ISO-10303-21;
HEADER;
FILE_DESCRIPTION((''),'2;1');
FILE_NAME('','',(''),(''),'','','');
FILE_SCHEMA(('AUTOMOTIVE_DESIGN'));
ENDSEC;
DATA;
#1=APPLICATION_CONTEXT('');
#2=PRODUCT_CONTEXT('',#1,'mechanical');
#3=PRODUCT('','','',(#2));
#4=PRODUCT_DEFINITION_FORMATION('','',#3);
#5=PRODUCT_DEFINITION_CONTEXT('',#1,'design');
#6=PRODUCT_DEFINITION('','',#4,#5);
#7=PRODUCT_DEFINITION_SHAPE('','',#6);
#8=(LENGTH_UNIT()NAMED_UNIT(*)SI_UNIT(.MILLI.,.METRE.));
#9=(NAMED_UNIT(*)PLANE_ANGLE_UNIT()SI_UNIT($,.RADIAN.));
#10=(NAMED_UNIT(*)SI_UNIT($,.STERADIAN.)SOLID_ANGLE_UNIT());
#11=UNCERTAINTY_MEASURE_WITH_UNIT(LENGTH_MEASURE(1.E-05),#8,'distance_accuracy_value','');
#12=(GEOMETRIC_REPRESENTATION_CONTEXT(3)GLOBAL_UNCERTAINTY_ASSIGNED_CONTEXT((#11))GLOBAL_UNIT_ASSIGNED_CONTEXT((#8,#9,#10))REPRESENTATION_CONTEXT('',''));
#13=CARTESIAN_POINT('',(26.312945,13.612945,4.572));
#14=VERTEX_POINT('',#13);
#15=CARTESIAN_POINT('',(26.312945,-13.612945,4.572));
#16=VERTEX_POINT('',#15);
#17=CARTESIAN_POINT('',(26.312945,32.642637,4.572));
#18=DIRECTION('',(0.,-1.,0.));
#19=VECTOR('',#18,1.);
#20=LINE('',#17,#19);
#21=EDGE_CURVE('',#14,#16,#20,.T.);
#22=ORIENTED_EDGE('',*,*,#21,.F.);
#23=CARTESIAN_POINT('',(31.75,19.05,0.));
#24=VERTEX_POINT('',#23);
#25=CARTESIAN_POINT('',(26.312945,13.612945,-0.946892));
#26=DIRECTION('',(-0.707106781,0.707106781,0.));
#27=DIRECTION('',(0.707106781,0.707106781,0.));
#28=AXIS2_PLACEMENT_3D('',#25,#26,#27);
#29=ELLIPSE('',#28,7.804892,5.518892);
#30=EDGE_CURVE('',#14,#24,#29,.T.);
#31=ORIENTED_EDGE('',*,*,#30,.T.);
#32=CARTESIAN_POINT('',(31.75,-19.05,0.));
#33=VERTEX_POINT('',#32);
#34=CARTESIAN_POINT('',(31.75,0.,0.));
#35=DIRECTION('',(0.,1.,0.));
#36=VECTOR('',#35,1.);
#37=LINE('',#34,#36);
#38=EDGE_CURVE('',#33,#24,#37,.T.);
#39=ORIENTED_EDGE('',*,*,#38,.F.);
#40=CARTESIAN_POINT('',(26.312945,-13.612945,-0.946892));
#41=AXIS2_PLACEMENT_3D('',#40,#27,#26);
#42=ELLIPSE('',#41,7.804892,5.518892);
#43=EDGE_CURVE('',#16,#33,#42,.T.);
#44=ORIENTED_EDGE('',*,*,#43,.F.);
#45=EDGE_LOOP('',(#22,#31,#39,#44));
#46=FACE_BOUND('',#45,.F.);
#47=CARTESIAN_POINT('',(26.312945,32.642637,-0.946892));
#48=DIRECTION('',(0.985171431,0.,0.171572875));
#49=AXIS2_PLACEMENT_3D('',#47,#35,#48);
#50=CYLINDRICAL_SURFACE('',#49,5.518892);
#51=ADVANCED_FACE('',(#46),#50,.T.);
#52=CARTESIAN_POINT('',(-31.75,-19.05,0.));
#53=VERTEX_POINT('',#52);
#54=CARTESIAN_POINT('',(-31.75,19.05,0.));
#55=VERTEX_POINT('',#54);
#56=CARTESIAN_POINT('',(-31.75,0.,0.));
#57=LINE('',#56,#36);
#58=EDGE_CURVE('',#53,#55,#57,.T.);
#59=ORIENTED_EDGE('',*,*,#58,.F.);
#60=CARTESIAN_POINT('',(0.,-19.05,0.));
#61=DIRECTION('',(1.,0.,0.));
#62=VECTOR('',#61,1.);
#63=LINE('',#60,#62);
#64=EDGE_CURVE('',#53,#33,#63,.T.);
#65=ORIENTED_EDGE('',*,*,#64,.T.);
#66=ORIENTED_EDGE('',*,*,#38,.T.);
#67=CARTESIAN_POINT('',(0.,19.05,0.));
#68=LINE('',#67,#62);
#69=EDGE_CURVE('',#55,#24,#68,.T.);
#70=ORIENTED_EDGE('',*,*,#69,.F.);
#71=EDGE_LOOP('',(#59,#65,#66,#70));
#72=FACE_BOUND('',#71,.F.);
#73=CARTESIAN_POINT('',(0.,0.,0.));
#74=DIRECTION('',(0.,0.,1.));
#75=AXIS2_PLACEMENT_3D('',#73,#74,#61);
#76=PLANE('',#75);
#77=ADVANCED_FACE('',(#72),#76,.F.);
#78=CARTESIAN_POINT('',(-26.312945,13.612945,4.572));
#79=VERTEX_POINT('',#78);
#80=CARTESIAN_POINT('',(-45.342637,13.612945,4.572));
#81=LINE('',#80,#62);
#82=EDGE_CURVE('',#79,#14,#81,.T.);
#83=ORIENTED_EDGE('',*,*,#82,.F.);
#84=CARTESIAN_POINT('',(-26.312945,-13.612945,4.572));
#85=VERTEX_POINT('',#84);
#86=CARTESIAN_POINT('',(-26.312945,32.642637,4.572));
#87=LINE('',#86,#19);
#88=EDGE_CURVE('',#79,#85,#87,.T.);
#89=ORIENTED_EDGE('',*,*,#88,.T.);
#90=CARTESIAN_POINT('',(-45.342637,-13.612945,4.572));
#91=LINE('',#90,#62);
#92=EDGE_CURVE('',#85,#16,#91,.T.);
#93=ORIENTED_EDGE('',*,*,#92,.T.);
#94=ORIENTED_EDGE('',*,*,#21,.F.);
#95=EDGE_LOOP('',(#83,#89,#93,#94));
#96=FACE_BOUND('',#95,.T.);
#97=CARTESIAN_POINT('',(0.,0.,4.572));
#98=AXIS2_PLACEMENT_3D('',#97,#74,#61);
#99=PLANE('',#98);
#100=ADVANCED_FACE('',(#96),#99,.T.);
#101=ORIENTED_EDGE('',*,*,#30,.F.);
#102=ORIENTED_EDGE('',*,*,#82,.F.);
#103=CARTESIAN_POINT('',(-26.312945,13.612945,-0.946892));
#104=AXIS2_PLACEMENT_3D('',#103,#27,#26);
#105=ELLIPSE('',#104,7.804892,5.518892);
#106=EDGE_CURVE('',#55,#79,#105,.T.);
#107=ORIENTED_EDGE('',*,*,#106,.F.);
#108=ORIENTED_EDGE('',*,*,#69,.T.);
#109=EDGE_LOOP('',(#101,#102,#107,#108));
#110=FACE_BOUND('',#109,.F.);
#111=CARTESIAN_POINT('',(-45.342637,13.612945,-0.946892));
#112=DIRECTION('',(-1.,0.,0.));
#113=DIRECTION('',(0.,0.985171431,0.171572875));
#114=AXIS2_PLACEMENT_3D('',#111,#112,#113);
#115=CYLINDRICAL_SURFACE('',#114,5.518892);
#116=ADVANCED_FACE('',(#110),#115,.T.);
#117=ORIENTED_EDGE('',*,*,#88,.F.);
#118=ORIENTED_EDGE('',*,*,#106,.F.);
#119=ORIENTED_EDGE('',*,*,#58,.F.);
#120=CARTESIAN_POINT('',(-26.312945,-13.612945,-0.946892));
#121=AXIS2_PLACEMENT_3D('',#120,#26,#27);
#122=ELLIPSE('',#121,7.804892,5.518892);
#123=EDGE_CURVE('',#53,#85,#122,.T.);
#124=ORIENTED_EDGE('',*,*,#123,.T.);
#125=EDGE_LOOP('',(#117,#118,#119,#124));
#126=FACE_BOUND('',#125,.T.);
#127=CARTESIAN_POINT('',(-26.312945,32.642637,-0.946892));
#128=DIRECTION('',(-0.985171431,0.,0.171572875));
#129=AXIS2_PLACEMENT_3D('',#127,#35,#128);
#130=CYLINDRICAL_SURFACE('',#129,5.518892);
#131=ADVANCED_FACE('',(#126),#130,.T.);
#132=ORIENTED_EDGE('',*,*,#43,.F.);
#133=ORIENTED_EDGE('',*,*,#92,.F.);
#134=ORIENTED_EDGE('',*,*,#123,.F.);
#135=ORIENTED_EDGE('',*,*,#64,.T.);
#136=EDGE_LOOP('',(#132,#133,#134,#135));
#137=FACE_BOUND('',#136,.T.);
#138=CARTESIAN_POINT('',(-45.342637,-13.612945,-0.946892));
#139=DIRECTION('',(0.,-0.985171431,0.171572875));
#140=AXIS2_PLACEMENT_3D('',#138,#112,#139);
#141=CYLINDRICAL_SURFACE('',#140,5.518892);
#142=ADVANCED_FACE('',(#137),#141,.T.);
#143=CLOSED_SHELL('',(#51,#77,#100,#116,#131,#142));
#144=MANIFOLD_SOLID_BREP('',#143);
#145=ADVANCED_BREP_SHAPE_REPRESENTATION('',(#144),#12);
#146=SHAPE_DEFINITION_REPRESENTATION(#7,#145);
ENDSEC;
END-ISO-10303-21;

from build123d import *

# Parameters (mm, degrees)
F0_W        = 63.5
F0_H        = 38.1
F1_DEPTH    = 4.572
F2_T1_DEPTH = 65.285274649
F2_T3_DEPTH = 90.685274649


# Not quite as in the source:
# - a fillet or chamfer that OpenCascade refuses, or shapes differently, is made with other operations: its cross-section is extruded or revolved along the edge and cut away or added
# - the program builds the solid bodies; features that only make, move or delete a surface that nothing else refers to are left out


with BuildPart() as f1:
    # F0 (on Top) → F1 (new body)
    with BuildSketch(Plane.XY):
        Rectangle(F0_W, F0_H)
    extrude(amount=F1_DEPTH)

    # F2: fillet of radius 5.5188922036 on 4 edges, made by hand

    # F2_s2 → F2_t1 (cut)
    with BuildSketch(Plane.XZ.offset(-32.6426373245)):
        with BuildLine():
            ThreePointArc((-31.75, 0), (-29.8648723748, 3.2770850191), (-26.3129450702, 4.572))
            Line((-26.3129450702, 4.572), (-31.75, 4.572))
            Line((-31.75, 4.572), (-31.75, 0))
        make_face()
        with BuildLine():
            ThreePointArc((31.75, 0), (29.8648723748, 3.2770850191), (26.3129450702, 4.572))
            Line((26.3129450702, 4.572), (31.75, 4.572))
            Line((31.75, 4.572), (31.75, 0))
        make_face()
    extrude(amount=F2_T1_DEPTH, mode=Mode.SUBTRACT)

    # F2_s4 → F2_t3 (cut)
    with BuildSketch(Plane.YZ.offset(-45.3426373245)):
        with BuildLine():
            ThreePointArc((-19.05, 0), (-17.1648723748, 3.2770850191), (-13.6129450702, 4.572))
            Line((-13.6129450702, 4.572), (-19.05, 4.572))
            Line((-19.05, 4.572), (-19.05, 0))
        make_face()
        with BuildLine():
            ThreePointArc((19.05, 0), (17.1648723748, 3.2770850191), (13.6129450702, 4.572))
            Line((13.6129450702, 4.572), (19.05, 4.572))
            Line((19.05, 4.572), (19.05, 0))
        make_face()
    extrude(amount=F2_T3_DEPTH, mode=Mode.SUBTRACT)


solid = f1.part
